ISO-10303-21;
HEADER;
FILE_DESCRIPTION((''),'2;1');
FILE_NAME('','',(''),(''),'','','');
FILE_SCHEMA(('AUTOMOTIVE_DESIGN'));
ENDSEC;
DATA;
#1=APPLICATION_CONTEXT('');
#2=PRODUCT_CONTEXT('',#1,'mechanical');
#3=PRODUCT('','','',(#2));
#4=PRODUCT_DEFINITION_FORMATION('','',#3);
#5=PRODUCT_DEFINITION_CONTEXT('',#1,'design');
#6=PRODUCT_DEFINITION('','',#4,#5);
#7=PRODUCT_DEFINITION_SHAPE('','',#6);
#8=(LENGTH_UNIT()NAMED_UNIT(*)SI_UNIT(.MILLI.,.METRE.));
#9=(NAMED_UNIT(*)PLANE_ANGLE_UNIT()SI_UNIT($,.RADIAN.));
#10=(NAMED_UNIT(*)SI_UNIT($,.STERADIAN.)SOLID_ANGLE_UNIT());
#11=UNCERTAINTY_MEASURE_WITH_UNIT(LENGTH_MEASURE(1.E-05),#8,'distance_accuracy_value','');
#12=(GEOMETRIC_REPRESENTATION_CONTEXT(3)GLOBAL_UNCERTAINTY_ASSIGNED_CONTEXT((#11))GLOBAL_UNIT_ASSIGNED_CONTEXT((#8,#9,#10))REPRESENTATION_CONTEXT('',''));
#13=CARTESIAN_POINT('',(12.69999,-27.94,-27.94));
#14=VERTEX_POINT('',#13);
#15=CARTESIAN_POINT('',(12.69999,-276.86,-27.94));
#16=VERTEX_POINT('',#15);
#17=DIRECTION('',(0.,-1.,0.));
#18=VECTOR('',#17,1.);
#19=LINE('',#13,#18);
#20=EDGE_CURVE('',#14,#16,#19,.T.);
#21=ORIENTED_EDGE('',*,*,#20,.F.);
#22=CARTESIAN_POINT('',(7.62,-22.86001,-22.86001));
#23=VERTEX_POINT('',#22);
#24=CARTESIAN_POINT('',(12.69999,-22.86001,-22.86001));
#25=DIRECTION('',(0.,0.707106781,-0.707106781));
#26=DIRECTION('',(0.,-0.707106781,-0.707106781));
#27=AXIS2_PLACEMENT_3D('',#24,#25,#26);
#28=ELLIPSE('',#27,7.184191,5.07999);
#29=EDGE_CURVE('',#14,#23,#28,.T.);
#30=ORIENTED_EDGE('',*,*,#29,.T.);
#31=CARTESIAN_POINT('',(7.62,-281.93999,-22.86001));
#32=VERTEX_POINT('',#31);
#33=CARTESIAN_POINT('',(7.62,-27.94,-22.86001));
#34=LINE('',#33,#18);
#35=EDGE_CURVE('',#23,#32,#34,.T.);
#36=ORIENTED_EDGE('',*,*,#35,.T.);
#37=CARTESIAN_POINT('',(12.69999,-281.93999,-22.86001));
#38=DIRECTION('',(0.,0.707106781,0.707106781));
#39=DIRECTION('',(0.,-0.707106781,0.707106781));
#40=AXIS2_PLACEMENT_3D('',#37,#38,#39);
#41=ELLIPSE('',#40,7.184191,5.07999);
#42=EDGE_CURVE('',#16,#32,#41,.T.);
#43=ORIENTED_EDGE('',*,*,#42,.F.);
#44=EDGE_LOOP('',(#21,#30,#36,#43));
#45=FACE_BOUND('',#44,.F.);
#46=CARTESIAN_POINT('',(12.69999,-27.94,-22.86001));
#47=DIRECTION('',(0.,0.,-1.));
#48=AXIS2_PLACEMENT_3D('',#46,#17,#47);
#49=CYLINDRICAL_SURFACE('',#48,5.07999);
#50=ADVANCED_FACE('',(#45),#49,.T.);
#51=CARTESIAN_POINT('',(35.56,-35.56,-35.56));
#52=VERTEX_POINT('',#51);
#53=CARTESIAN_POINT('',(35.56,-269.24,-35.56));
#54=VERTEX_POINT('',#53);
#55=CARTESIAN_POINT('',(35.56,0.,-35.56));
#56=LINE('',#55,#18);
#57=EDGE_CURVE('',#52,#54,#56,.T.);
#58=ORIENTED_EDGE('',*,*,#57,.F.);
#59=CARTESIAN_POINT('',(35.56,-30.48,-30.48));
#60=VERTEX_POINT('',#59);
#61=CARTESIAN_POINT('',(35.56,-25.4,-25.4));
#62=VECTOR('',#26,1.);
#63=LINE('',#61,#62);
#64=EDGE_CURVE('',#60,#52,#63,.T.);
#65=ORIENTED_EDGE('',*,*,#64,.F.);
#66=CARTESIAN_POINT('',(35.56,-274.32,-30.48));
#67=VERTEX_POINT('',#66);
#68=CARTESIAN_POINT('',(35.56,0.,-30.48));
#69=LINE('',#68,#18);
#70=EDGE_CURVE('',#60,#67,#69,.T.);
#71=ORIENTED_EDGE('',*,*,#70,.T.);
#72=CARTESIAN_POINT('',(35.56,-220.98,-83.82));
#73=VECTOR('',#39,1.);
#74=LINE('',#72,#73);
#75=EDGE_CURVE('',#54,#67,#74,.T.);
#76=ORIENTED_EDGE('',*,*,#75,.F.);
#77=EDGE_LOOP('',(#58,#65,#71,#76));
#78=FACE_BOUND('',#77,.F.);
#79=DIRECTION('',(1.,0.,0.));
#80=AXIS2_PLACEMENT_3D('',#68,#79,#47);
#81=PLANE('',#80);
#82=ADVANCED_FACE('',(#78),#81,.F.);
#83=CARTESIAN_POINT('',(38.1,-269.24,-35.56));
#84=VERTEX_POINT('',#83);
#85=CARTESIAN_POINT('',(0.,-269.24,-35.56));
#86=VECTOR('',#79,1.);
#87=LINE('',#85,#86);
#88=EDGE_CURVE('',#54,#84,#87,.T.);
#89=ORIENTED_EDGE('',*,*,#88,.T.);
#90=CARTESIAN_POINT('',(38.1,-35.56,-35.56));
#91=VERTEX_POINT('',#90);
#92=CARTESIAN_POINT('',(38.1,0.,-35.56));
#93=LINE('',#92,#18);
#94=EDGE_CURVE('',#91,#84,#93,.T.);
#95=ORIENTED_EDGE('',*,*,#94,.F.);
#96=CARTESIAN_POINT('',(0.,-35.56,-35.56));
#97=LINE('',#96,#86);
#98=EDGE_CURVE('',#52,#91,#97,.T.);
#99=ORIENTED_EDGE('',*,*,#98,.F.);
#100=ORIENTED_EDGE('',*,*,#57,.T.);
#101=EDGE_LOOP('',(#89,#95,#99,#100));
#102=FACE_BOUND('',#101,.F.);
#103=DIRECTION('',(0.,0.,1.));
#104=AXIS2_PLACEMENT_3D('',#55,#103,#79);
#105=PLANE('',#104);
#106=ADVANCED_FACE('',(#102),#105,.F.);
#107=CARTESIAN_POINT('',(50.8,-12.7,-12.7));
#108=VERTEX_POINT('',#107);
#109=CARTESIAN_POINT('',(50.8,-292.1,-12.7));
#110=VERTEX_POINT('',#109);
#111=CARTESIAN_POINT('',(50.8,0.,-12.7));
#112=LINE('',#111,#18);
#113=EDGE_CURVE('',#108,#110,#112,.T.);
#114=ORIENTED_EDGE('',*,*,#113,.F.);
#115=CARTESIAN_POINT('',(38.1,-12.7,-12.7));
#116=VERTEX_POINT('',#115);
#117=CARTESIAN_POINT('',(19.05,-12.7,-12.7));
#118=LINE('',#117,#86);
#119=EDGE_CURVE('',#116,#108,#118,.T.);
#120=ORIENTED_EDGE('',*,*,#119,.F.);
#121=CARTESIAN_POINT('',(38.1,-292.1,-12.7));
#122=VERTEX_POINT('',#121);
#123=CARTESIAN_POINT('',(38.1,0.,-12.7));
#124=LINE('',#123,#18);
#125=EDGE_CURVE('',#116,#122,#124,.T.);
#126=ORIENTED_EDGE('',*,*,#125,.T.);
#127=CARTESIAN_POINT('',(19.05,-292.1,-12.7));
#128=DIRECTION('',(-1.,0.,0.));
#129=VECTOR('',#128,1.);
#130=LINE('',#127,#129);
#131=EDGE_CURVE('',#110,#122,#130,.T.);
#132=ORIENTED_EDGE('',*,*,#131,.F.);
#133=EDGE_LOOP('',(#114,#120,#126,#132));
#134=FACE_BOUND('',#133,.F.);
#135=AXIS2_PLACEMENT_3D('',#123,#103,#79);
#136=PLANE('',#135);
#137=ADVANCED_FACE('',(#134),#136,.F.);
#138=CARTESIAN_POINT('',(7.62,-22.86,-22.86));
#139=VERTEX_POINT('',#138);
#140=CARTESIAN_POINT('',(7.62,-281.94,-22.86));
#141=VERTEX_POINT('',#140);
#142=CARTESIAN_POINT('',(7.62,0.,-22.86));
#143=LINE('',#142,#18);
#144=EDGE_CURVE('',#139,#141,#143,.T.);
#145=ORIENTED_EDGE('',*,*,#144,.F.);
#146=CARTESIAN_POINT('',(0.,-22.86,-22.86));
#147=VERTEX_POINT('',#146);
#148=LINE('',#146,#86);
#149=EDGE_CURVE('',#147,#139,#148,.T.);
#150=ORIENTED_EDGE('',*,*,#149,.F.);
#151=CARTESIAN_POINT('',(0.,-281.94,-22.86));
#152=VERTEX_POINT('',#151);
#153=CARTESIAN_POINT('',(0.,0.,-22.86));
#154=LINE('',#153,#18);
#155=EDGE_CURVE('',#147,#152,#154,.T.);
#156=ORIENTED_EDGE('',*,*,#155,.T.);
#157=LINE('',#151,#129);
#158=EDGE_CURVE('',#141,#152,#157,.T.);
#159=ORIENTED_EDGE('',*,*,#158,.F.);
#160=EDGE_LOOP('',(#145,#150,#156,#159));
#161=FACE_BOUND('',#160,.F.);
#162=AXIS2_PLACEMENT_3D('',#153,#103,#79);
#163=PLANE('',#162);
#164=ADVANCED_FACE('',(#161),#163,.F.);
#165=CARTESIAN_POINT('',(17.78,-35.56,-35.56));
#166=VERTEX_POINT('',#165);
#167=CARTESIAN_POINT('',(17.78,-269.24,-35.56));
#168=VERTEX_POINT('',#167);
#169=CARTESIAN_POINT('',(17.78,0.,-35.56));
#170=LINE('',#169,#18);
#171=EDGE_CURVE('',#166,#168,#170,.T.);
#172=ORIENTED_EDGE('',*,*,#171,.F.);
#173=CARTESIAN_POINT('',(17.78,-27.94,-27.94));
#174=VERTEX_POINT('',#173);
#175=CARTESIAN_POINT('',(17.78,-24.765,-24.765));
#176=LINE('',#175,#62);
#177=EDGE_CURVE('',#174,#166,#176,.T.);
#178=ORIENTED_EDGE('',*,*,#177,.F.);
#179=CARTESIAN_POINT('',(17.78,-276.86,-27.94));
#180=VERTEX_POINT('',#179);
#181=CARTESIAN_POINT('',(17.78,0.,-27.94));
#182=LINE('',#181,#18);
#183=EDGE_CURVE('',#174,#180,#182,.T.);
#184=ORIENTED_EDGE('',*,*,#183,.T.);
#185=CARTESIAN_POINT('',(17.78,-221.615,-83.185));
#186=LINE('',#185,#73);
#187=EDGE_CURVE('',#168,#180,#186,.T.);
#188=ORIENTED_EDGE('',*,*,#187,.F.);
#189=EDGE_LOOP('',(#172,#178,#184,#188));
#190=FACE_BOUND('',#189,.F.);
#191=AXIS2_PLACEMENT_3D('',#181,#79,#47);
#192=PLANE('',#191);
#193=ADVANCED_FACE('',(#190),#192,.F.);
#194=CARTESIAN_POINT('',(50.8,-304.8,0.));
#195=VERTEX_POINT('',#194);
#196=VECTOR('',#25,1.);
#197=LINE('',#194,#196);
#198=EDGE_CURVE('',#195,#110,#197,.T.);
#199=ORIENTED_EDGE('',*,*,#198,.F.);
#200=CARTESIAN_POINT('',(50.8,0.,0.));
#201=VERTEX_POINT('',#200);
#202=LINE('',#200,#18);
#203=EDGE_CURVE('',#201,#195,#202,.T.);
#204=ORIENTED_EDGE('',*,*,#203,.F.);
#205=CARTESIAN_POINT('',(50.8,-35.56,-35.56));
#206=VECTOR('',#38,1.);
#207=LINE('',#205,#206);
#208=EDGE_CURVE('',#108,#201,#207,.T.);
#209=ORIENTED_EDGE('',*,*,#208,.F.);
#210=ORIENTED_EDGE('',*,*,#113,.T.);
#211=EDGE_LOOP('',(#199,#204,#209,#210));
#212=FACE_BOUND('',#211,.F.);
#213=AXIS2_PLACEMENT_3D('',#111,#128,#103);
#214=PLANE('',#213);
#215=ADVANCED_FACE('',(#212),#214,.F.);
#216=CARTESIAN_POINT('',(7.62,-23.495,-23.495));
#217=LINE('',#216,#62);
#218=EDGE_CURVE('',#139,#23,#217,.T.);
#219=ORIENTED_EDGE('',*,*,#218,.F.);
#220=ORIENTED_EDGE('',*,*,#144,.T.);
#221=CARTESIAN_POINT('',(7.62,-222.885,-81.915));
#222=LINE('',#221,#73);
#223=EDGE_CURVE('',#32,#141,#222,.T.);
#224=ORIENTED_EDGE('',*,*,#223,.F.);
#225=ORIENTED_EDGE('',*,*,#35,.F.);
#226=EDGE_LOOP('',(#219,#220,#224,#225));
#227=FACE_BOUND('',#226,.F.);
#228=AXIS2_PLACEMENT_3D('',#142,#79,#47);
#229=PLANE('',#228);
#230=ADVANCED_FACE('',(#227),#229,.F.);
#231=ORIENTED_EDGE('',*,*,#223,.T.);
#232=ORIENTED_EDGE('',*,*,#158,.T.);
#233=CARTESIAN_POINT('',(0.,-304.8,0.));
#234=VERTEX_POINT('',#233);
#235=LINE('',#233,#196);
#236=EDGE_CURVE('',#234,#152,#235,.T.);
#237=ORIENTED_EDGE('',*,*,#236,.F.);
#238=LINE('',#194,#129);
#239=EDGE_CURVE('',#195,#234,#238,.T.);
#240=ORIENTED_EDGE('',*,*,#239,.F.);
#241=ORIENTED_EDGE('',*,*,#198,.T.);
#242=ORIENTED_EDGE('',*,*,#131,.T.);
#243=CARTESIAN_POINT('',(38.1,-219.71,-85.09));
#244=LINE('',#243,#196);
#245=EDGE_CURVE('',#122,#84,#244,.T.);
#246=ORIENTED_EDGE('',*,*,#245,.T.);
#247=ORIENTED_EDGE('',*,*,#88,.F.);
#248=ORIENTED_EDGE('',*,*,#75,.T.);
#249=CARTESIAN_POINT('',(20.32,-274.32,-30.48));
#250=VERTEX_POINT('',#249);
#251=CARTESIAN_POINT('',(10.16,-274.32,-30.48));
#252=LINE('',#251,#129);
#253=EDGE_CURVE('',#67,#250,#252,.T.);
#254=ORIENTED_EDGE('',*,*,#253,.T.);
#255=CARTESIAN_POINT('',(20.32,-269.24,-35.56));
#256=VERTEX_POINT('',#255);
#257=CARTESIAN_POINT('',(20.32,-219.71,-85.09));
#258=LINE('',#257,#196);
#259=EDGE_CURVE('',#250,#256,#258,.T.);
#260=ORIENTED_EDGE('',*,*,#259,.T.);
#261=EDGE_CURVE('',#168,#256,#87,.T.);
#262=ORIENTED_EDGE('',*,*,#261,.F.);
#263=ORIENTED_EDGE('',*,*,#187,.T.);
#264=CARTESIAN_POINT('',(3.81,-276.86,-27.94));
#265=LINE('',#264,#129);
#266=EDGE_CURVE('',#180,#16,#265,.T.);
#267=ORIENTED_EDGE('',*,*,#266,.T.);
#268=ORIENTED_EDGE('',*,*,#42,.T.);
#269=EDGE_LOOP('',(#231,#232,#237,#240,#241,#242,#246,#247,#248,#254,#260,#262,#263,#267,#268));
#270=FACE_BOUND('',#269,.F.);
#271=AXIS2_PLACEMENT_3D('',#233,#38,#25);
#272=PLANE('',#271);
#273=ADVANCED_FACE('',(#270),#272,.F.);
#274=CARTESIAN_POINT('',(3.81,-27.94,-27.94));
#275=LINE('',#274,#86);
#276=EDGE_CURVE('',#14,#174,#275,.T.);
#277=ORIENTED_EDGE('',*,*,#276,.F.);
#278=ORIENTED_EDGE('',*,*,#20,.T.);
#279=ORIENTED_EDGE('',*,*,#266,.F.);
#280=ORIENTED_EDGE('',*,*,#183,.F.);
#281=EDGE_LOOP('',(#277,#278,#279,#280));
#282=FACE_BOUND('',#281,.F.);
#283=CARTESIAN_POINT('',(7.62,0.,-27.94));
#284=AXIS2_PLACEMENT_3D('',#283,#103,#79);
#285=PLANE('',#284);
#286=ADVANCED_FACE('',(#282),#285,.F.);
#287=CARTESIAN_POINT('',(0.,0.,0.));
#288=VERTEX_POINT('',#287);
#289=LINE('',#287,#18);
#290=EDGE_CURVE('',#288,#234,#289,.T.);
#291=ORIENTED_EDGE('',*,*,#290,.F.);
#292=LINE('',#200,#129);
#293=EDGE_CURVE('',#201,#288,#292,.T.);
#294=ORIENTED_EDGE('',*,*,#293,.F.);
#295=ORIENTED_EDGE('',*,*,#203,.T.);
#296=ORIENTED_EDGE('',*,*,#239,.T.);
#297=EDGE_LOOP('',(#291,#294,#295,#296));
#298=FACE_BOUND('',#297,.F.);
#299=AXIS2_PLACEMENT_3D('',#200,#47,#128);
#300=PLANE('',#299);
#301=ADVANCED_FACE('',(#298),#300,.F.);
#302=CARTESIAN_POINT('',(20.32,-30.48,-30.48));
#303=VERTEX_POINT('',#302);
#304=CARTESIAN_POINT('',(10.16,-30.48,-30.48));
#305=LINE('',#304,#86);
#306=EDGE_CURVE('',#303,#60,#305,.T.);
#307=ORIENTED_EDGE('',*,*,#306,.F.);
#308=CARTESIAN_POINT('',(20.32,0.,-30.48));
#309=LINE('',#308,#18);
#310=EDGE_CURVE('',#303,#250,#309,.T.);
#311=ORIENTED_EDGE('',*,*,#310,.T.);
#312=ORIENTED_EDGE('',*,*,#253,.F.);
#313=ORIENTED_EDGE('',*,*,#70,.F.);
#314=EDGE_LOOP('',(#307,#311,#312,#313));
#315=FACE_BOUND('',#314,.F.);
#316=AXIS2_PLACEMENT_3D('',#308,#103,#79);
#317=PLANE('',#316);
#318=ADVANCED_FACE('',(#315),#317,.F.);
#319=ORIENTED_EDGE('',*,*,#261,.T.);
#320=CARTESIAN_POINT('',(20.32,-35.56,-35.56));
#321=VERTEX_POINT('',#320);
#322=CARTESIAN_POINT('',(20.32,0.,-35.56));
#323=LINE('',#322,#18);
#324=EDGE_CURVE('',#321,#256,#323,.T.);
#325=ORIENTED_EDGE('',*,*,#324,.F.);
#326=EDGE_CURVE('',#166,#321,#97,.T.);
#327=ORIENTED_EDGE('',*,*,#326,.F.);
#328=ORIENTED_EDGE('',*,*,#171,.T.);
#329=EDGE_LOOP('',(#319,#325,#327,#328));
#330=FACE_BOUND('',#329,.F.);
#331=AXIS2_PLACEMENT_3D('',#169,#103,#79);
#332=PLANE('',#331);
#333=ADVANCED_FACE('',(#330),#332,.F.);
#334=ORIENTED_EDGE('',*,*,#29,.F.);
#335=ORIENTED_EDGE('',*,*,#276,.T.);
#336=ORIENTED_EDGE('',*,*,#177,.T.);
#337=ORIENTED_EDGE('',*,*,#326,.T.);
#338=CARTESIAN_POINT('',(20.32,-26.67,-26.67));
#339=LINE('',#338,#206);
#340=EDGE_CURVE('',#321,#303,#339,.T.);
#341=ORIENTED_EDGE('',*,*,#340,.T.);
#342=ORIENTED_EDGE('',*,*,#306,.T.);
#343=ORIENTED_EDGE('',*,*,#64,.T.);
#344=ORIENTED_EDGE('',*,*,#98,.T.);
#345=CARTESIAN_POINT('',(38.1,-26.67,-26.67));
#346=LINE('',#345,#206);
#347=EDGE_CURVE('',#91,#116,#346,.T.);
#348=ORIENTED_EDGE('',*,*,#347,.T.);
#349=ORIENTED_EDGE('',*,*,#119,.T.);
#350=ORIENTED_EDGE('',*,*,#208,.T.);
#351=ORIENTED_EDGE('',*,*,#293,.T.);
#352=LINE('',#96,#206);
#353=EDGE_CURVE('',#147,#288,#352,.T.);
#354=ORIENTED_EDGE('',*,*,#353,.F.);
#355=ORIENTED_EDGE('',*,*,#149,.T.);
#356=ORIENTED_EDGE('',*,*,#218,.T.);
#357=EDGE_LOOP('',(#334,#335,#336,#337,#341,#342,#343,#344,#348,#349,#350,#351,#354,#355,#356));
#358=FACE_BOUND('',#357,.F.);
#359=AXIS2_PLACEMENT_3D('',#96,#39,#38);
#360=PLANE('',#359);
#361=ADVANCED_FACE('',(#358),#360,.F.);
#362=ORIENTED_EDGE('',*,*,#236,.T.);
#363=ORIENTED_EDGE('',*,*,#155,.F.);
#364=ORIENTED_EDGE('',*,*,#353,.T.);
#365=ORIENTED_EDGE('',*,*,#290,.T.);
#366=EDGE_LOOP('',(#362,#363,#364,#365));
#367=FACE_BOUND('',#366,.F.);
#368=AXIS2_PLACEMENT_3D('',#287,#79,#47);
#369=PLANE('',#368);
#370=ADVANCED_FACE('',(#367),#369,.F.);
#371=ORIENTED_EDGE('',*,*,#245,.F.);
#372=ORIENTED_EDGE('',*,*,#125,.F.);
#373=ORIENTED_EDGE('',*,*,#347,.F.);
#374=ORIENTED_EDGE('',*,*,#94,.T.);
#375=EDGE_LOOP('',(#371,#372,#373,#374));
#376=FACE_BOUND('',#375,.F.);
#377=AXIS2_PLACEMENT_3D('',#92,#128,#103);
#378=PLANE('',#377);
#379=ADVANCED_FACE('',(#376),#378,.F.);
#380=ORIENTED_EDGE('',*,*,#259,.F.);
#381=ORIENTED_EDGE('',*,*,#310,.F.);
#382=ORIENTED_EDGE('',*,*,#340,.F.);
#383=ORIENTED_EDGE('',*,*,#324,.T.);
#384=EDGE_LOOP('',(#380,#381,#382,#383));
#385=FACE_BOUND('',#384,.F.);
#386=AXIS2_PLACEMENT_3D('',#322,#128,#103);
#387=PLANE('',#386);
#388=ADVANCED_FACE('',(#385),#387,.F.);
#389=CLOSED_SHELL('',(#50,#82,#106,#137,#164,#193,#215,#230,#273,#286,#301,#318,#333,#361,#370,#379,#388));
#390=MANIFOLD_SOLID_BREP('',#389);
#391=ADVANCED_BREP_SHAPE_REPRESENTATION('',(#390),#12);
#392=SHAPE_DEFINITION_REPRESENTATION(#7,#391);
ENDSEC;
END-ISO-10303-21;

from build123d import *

# Parameters (mm, degrees)
F1_DEPTH = 304.8
F3_DEPTH = 50.8
F4_R     = 5.07999


# Not quite as in the source:
# - a fillet or chamfer is up to 0.001 mm smaller than in the source, because OpenCascade refuses the exact size


with BuildPart() as f1:
    # F0 (on Front) → F1 (new body)
    with BuildSketch(Plane.XZ):
        Polygon((50.8, 0), (0, 0), (0, -22.86), (7.62, -22.86), (7.62, -27.94), (17.78, -27.94), (17.78, -35.56), (20.32, -35.56), (20.32, -30.48), (35.56, -30.48), (35.56, -35.56), (38.1, -35.56), (38.1, -12.7), (50.8, -12.7), align=None)
    extrude(amount=F1_DEPTH)

    # F2 (on face) → F3 (cut)
    with BuildSketch(Plane(origin=(0, 0, 0), x_dir=(0, -1, 0), z_dir=(-1, 0, 0))):
        Polygon((35.56, -35.56), (0, 0), (0, -35.56), align=None)
        Polygon((304.8, -35.56), (304.8, 0), (269.24, -35.56), align=None)
    extrude(amount=-F3_DEPTH, mode=Mode.SUBTRACT)

    # F4 (radius 5.08 in the source; OpenCascade refuses exactly that, so slightly less here)
    f4_edges = [f1.edges().sort_by_distance(p)[0] for p in [
        (7.62, -152.4, -27.94),
    ]]
    fillet(f4_edges, radius=F4_R)


solid = f1.part
